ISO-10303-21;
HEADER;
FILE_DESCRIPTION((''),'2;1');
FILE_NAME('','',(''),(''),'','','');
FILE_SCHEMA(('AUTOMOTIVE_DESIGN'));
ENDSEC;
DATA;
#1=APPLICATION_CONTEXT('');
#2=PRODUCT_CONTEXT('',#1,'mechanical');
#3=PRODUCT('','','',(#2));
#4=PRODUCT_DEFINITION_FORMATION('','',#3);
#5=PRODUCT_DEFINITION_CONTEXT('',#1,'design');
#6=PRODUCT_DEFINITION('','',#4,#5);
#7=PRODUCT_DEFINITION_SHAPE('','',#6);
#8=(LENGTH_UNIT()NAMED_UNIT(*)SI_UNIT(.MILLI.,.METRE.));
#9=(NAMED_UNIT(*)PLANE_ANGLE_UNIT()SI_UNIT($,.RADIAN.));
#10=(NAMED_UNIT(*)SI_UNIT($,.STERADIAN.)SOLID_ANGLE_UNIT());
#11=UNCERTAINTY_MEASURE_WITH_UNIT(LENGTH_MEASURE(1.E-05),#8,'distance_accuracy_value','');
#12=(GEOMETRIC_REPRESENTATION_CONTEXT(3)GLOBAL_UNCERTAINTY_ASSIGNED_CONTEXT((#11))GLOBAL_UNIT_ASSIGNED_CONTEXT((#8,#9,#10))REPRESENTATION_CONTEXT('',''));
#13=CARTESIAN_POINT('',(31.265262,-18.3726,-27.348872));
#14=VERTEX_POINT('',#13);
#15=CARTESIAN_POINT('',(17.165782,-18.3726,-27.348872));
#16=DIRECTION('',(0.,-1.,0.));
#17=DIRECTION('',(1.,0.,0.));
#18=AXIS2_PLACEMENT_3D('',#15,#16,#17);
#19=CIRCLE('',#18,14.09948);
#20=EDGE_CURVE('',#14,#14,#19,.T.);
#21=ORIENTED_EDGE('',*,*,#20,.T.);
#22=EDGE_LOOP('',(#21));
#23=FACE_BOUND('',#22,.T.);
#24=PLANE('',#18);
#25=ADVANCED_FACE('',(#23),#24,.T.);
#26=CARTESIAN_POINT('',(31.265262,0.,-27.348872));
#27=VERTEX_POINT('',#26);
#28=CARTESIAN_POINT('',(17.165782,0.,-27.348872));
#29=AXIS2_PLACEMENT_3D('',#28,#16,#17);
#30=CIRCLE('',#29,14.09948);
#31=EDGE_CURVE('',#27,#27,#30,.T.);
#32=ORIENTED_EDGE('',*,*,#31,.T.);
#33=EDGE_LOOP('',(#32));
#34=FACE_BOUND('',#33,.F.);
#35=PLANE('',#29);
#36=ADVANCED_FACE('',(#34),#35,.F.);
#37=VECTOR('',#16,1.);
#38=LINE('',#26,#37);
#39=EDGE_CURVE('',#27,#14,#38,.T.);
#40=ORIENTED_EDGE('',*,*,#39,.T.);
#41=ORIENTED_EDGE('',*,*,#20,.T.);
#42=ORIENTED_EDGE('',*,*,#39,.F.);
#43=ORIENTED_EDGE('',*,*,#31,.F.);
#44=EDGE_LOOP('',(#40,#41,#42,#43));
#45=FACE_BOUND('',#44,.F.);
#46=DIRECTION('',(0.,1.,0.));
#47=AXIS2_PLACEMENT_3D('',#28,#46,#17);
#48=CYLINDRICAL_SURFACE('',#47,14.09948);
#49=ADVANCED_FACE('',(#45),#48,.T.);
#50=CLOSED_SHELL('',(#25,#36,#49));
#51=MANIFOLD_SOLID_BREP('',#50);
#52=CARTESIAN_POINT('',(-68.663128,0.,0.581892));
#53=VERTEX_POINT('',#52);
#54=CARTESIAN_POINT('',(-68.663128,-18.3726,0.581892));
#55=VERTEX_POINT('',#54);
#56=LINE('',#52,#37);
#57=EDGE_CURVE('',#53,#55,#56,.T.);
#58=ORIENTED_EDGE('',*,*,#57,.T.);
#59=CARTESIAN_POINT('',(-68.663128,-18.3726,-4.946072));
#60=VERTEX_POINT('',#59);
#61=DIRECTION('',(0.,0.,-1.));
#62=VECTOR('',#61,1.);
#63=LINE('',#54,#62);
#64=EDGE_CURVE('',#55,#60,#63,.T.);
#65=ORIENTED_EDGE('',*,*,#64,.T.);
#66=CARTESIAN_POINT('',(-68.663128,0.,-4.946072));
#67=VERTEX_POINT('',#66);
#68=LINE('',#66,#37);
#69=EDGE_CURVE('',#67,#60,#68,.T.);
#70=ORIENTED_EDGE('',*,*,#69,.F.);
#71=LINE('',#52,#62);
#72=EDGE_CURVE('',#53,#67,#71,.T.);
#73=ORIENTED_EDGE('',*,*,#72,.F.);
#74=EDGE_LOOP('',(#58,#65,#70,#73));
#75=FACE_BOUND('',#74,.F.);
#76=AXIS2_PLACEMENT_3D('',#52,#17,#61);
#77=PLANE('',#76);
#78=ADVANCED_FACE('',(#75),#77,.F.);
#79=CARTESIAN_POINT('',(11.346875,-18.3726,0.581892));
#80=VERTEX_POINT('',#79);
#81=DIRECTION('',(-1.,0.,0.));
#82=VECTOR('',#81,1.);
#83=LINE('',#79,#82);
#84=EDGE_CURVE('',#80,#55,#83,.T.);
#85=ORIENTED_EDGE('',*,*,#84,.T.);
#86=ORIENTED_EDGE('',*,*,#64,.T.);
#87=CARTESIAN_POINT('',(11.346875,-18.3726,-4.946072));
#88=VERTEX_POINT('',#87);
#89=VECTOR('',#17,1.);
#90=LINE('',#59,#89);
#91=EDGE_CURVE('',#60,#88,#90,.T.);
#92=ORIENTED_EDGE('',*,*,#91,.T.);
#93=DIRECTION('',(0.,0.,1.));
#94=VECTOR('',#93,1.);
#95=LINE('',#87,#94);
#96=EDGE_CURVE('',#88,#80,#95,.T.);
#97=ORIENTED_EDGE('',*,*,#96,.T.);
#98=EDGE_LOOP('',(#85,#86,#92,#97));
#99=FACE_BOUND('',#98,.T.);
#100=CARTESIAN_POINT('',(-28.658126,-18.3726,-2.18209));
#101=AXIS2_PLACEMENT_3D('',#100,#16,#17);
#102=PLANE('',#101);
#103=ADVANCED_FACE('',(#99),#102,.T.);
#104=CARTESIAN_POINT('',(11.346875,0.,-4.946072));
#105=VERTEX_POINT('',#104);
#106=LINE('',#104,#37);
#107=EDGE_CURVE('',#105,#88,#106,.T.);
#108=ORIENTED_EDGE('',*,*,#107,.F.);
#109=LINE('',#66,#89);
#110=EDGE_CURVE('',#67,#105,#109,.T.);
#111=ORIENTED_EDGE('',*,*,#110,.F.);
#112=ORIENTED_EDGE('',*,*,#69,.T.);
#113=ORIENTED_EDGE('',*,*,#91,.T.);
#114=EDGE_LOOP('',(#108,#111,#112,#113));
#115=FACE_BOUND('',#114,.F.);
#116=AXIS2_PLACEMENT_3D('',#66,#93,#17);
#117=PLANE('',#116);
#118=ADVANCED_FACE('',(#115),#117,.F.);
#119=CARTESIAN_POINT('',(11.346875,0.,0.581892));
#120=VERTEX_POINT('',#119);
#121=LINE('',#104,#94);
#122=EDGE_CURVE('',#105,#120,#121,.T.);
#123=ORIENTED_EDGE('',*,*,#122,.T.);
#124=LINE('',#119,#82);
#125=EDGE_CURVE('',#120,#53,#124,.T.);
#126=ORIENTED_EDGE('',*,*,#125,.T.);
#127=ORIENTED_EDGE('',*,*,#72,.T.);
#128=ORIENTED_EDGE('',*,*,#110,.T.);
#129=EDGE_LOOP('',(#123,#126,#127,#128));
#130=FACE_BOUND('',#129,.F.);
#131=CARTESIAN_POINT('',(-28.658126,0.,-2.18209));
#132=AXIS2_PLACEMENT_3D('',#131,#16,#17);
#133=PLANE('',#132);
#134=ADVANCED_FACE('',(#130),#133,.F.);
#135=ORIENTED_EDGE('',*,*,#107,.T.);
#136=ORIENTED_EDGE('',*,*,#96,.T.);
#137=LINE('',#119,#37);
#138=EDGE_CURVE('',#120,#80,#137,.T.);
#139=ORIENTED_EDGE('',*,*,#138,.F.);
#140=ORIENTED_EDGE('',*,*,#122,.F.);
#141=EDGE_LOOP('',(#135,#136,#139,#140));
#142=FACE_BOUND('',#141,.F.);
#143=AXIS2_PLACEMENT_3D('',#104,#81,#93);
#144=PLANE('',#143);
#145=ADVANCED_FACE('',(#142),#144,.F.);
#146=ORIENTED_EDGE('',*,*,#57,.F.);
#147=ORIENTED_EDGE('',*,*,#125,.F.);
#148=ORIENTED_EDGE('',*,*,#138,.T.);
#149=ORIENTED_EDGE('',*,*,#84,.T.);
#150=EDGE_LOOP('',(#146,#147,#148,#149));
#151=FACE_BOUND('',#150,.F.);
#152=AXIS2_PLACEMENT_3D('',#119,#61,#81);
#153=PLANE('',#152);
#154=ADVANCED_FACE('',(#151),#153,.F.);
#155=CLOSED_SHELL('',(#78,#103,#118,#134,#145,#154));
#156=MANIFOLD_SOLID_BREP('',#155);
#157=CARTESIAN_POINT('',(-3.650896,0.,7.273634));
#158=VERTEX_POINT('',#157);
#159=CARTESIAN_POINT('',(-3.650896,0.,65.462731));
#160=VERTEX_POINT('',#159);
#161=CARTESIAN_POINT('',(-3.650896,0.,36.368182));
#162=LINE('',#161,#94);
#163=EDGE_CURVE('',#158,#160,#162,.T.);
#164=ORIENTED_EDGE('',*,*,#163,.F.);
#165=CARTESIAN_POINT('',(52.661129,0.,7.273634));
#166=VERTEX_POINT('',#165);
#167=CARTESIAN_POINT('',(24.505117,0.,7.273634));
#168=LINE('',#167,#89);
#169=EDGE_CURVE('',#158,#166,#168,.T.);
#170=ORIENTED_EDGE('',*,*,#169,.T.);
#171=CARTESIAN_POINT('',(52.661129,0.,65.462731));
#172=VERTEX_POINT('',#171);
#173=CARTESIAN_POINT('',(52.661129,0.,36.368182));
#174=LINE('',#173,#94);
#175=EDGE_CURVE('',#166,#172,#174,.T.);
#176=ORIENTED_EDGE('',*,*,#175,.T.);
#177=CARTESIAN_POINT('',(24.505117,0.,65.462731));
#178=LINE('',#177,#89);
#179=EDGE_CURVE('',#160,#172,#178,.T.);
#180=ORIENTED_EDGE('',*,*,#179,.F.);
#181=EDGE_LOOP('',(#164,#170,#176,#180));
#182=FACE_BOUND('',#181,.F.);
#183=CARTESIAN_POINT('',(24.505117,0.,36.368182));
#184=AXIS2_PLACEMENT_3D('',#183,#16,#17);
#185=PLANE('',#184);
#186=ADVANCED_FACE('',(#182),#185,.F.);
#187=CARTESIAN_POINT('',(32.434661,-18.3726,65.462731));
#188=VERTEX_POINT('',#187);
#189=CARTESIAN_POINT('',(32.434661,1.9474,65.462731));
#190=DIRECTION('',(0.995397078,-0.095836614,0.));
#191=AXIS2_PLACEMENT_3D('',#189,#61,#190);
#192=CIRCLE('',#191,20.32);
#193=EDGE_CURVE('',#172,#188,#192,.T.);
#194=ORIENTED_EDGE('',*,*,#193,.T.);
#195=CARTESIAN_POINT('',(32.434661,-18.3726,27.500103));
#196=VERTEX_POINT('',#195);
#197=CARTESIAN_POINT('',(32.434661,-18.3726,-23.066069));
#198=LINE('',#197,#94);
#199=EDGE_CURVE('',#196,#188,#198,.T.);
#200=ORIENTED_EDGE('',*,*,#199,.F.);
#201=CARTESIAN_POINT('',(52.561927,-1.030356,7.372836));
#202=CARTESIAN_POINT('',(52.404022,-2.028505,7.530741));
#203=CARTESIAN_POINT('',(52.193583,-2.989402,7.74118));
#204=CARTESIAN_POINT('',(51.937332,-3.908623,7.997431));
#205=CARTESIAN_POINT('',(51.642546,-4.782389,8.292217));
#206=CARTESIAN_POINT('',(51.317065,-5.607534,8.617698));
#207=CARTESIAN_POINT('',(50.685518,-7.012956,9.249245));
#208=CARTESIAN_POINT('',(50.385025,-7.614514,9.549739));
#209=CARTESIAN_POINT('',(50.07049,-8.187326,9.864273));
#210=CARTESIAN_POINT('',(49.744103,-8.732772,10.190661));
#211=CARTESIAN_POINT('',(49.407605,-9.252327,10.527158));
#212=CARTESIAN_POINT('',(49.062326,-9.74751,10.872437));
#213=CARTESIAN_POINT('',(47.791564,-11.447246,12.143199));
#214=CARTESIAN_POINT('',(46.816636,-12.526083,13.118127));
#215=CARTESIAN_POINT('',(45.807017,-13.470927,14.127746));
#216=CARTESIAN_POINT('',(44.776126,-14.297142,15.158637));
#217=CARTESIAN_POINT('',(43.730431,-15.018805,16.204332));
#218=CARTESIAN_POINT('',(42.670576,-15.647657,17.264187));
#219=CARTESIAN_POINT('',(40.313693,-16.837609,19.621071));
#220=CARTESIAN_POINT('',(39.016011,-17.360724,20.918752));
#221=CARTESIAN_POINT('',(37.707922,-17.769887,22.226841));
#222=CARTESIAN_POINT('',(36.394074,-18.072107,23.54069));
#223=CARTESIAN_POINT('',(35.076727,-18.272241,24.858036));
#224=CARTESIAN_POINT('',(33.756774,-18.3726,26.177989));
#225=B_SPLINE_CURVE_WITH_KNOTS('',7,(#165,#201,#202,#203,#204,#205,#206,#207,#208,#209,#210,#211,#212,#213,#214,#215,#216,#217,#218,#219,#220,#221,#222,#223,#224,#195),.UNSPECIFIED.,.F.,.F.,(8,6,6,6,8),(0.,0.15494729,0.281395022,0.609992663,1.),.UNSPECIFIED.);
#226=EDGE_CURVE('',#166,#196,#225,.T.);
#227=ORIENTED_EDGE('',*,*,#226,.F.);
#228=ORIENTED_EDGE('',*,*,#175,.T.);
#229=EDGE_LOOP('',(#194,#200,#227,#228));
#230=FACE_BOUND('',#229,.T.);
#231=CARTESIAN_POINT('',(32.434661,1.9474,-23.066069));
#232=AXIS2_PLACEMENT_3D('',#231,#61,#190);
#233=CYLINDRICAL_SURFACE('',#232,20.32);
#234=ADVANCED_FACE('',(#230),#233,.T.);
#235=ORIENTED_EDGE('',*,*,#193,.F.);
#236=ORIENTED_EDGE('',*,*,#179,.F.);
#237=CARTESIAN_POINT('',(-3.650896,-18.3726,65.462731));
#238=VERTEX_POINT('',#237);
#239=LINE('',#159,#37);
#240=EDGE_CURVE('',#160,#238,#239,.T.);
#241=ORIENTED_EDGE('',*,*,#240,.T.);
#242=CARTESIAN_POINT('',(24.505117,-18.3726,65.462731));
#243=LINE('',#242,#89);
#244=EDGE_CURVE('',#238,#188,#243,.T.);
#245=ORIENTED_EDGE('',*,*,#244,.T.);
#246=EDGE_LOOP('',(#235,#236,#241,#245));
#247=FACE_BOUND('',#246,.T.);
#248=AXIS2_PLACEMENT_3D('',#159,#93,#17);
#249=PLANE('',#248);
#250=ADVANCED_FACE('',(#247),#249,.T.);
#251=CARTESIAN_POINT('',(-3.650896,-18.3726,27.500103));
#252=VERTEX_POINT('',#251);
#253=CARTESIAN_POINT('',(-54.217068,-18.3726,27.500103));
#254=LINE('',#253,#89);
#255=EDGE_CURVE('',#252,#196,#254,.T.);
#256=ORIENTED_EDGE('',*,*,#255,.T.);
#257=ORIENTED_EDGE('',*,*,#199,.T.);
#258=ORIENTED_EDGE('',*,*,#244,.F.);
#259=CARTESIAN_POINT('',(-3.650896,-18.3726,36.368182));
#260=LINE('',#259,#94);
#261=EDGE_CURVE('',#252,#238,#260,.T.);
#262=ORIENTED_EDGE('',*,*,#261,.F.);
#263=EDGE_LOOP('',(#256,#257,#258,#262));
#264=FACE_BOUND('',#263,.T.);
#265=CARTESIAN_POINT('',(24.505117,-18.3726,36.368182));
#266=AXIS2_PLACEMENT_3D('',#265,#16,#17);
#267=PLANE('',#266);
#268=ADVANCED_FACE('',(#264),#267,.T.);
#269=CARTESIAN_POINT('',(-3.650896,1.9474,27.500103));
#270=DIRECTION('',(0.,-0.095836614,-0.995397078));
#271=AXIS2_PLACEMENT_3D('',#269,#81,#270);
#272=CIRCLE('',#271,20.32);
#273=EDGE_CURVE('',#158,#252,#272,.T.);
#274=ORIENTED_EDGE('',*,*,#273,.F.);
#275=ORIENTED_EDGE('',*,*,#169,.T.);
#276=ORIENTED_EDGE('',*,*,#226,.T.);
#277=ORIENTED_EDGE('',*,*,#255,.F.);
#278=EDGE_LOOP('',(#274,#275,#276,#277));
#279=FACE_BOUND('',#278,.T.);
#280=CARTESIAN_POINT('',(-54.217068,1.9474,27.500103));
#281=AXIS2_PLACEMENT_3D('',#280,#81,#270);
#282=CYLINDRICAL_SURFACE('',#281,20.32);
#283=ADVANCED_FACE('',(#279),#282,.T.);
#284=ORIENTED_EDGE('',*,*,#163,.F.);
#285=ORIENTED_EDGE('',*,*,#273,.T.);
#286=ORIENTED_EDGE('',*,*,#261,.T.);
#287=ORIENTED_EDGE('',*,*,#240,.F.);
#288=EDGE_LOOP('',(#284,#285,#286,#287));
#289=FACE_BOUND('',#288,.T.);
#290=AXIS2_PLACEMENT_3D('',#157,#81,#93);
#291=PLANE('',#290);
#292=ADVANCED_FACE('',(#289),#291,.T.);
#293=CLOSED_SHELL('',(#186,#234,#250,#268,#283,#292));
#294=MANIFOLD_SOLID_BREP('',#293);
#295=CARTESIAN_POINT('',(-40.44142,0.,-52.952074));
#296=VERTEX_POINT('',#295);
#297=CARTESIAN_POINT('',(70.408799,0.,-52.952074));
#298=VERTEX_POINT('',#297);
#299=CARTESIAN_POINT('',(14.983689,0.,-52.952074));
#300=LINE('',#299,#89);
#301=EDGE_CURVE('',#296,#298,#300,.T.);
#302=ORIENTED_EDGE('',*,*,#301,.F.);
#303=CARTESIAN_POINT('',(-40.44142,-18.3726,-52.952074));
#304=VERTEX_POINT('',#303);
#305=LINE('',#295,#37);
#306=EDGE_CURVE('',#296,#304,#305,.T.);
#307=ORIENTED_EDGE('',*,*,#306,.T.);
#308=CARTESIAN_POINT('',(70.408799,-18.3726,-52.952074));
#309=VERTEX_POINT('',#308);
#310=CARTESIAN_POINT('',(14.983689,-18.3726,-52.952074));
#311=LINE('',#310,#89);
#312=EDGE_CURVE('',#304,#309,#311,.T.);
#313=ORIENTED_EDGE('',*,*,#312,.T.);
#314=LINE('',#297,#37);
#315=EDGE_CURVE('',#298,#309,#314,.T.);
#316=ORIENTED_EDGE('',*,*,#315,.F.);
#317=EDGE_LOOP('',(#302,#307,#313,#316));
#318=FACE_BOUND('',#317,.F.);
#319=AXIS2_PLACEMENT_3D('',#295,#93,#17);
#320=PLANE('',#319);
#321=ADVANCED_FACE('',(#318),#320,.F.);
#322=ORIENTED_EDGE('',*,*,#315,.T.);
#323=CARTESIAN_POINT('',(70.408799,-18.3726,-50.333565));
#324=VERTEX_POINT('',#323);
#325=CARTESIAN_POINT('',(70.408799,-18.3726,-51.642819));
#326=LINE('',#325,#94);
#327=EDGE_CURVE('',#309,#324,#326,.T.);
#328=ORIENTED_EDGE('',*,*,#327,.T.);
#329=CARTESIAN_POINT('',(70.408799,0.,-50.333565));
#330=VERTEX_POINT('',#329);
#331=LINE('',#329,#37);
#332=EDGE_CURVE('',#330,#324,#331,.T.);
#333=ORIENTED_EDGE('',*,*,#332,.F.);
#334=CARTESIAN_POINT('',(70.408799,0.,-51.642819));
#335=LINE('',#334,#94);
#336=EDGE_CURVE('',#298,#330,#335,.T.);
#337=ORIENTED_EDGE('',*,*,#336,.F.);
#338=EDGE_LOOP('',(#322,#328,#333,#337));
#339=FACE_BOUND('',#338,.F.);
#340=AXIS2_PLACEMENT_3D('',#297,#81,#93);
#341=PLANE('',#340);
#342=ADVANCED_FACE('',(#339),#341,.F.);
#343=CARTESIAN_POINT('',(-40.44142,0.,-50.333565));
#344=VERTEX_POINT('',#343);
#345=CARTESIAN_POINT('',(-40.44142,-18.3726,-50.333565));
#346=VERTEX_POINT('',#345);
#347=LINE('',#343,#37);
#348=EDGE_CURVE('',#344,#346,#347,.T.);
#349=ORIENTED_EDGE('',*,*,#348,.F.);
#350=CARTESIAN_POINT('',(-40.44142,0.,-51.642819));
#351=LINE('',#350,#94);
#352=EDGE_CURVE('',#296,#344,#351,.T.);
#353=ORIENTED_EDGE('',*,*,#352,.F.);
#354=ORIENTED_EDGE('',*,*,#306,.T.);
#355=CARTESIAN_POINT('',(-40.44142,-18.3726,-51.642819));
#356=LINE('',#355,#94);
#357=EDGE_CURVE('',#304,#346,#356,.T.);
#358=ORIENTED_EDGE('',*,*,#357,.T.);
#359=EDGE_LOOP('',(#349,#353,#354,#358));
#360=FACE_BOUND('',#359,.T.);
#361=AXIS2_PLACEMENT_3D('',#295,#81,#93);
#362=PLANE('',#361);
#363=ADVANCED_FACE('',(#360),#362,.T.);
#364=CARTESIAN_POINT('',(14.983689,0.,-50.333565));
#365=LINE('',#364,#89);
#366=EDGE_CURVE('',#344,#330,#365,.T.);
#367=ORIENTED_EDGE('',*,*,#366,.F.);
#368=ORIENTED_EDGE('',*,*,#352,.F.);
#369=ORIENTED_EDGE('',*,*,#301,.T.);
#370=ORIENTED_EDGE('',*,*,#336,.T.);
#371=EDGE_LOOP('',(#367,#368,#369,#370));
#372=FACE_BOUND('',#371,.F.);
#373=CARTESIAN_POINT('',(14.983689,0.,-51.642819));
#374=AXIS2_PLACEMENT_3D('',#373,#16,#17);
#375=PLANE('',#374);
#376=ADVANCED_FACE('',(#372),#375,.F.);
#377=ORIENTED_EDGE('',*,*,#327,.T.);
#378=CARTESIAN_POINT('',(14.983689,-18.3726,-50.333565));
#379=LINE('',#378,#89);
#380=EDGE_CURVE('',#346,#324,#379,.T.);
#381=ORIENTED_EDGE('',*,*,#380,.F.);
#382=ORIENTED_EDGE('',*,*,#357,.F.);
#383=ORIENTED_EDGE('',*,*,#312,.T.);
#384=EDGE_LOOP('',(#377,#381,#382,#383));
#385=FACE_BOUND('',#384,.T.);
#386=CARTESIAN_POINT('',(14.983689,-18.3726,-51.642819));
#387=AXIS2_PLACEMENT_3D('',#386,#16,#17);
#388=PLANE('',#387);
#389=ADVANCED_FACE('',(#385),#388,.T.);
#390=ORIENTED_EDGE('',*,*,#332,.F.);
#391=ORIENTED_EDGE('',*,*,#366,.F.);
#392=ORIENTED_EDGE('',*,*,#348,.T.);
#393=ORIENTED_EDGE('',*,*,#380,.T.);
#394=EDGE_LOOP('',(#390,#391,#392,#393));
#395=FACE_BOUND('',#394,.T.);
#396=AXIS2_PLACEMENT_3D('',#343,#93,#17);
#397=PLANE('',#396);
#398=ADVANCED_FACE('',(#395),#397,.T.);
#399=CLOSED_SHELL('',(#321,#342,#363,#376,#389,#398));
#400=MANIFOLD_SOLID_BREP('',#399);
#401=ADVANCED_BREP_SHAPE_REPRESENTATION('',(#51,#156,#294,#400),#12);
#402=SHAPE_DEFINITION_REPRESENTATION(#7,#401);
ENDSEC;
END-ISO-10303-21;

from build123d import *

# Parameters (mm, degrees)
F0_W        = 110.8502186835
F0_H        = 2.6185084134
F1_DEPTH    = 18.3726
F0_W_2      = 56.3120255373
F0_H_2      = 58.1890968606
F0_R        = 14.0994798806
F2_T1_DEPTH = 157.4443686872
F3_T1_DEPTH = 139.0949713805


# Not quite as in the source:
# - a fillet or chamfer that OpenCascade refuses, or shapes differently, is made with other operations: its cross-section is extruded or revolved along the edge and cut away or added


with BuildPart() as f1:
    # F0 (on Front) → F1 (new body)
    with BuildSketch(Plane.XZ):
        with Locations((14.9836894125, -51.6428193077)):
            Rectangle(F0_W, F0_H)
    extrude(amount=F1_DEPTH)


with BuildPart() as f1b:
    # F0 (on Front) → F1, piece 2 (new body)
    with BuildSketch(Plane.XZ):
        with Locations((24.5051165048, 36.3681823947)):
            Rectangle(F0_W_2, F0_H_2)
    extrude(amount=F1_DEPTH)

    # F2: fillet of radius 20.32 on 1 edges, made by hand

    # F2_s2 → F2_t1 (cut)
    with BuildSketch(Plane.YZ.offset(-54.2170678388)):
        with BuildLine():
            ThreePointArc((0, 7.2736339644), (-13.0937696354, 13.8375400236), (-18.3726, 27.5001025944))
            Line((-18.3726, 27.5001025944), (-18.3726, 7.2736339644))
            Line((-18.3726, 7.2736339644), (0, 7.2736339644))
        make_face()
    extrude(amount=F2_T1_DEPTH, mode=Mode.SUBTRACT)

    # F3: fillet of radius 20.32 on 1 edges, made by hand

    # F3_s2 → F3_t1 (cut)
    with BuildSketch(Plane.XY.offset(-23.0660689806)):
        with BuildLine():
            ThreePointArc((52.6611292735, 0), (46.0972232142, -13.0937696354), (32.4346606435, -18.3726))
            Line((32.4346606435, -18.3726), (52.6611292735, -18.3726))
            Line((52.6611292735, -18.3726), (52.6611292735, 0))
        make_face()
    extrude(amount=F3_T1_DEPTH, mode=Mode.SUBTRACT)


with BuildPart() as f1c:
    # F0 (on Front) → F1, piece 3 (new body)
    with BuildSketch(Plane.XZ):
        with Locations((17.1657819301, -27.3488722742)):
            Circle(F0_R)
    extrude(amount=F1_DEPTH)


with BuildPart() as f1d:
    # F0 (on Front) → F1, piece 4 (new body)
    with BuildSketch(Plane.XZ):
        Polygon((-68.6631277204, -4.9460716546), (11.3468747586, -4.9460716546), (11.3468747586, 0), (11.3468747586, 0.5818922073), (-68.6631277204, 0.5818922073), align=None)
    extrude(amount=F1_DEPTH)


solid = Compound([f1.part, f1b.part, f1c.part, f1d.part])
